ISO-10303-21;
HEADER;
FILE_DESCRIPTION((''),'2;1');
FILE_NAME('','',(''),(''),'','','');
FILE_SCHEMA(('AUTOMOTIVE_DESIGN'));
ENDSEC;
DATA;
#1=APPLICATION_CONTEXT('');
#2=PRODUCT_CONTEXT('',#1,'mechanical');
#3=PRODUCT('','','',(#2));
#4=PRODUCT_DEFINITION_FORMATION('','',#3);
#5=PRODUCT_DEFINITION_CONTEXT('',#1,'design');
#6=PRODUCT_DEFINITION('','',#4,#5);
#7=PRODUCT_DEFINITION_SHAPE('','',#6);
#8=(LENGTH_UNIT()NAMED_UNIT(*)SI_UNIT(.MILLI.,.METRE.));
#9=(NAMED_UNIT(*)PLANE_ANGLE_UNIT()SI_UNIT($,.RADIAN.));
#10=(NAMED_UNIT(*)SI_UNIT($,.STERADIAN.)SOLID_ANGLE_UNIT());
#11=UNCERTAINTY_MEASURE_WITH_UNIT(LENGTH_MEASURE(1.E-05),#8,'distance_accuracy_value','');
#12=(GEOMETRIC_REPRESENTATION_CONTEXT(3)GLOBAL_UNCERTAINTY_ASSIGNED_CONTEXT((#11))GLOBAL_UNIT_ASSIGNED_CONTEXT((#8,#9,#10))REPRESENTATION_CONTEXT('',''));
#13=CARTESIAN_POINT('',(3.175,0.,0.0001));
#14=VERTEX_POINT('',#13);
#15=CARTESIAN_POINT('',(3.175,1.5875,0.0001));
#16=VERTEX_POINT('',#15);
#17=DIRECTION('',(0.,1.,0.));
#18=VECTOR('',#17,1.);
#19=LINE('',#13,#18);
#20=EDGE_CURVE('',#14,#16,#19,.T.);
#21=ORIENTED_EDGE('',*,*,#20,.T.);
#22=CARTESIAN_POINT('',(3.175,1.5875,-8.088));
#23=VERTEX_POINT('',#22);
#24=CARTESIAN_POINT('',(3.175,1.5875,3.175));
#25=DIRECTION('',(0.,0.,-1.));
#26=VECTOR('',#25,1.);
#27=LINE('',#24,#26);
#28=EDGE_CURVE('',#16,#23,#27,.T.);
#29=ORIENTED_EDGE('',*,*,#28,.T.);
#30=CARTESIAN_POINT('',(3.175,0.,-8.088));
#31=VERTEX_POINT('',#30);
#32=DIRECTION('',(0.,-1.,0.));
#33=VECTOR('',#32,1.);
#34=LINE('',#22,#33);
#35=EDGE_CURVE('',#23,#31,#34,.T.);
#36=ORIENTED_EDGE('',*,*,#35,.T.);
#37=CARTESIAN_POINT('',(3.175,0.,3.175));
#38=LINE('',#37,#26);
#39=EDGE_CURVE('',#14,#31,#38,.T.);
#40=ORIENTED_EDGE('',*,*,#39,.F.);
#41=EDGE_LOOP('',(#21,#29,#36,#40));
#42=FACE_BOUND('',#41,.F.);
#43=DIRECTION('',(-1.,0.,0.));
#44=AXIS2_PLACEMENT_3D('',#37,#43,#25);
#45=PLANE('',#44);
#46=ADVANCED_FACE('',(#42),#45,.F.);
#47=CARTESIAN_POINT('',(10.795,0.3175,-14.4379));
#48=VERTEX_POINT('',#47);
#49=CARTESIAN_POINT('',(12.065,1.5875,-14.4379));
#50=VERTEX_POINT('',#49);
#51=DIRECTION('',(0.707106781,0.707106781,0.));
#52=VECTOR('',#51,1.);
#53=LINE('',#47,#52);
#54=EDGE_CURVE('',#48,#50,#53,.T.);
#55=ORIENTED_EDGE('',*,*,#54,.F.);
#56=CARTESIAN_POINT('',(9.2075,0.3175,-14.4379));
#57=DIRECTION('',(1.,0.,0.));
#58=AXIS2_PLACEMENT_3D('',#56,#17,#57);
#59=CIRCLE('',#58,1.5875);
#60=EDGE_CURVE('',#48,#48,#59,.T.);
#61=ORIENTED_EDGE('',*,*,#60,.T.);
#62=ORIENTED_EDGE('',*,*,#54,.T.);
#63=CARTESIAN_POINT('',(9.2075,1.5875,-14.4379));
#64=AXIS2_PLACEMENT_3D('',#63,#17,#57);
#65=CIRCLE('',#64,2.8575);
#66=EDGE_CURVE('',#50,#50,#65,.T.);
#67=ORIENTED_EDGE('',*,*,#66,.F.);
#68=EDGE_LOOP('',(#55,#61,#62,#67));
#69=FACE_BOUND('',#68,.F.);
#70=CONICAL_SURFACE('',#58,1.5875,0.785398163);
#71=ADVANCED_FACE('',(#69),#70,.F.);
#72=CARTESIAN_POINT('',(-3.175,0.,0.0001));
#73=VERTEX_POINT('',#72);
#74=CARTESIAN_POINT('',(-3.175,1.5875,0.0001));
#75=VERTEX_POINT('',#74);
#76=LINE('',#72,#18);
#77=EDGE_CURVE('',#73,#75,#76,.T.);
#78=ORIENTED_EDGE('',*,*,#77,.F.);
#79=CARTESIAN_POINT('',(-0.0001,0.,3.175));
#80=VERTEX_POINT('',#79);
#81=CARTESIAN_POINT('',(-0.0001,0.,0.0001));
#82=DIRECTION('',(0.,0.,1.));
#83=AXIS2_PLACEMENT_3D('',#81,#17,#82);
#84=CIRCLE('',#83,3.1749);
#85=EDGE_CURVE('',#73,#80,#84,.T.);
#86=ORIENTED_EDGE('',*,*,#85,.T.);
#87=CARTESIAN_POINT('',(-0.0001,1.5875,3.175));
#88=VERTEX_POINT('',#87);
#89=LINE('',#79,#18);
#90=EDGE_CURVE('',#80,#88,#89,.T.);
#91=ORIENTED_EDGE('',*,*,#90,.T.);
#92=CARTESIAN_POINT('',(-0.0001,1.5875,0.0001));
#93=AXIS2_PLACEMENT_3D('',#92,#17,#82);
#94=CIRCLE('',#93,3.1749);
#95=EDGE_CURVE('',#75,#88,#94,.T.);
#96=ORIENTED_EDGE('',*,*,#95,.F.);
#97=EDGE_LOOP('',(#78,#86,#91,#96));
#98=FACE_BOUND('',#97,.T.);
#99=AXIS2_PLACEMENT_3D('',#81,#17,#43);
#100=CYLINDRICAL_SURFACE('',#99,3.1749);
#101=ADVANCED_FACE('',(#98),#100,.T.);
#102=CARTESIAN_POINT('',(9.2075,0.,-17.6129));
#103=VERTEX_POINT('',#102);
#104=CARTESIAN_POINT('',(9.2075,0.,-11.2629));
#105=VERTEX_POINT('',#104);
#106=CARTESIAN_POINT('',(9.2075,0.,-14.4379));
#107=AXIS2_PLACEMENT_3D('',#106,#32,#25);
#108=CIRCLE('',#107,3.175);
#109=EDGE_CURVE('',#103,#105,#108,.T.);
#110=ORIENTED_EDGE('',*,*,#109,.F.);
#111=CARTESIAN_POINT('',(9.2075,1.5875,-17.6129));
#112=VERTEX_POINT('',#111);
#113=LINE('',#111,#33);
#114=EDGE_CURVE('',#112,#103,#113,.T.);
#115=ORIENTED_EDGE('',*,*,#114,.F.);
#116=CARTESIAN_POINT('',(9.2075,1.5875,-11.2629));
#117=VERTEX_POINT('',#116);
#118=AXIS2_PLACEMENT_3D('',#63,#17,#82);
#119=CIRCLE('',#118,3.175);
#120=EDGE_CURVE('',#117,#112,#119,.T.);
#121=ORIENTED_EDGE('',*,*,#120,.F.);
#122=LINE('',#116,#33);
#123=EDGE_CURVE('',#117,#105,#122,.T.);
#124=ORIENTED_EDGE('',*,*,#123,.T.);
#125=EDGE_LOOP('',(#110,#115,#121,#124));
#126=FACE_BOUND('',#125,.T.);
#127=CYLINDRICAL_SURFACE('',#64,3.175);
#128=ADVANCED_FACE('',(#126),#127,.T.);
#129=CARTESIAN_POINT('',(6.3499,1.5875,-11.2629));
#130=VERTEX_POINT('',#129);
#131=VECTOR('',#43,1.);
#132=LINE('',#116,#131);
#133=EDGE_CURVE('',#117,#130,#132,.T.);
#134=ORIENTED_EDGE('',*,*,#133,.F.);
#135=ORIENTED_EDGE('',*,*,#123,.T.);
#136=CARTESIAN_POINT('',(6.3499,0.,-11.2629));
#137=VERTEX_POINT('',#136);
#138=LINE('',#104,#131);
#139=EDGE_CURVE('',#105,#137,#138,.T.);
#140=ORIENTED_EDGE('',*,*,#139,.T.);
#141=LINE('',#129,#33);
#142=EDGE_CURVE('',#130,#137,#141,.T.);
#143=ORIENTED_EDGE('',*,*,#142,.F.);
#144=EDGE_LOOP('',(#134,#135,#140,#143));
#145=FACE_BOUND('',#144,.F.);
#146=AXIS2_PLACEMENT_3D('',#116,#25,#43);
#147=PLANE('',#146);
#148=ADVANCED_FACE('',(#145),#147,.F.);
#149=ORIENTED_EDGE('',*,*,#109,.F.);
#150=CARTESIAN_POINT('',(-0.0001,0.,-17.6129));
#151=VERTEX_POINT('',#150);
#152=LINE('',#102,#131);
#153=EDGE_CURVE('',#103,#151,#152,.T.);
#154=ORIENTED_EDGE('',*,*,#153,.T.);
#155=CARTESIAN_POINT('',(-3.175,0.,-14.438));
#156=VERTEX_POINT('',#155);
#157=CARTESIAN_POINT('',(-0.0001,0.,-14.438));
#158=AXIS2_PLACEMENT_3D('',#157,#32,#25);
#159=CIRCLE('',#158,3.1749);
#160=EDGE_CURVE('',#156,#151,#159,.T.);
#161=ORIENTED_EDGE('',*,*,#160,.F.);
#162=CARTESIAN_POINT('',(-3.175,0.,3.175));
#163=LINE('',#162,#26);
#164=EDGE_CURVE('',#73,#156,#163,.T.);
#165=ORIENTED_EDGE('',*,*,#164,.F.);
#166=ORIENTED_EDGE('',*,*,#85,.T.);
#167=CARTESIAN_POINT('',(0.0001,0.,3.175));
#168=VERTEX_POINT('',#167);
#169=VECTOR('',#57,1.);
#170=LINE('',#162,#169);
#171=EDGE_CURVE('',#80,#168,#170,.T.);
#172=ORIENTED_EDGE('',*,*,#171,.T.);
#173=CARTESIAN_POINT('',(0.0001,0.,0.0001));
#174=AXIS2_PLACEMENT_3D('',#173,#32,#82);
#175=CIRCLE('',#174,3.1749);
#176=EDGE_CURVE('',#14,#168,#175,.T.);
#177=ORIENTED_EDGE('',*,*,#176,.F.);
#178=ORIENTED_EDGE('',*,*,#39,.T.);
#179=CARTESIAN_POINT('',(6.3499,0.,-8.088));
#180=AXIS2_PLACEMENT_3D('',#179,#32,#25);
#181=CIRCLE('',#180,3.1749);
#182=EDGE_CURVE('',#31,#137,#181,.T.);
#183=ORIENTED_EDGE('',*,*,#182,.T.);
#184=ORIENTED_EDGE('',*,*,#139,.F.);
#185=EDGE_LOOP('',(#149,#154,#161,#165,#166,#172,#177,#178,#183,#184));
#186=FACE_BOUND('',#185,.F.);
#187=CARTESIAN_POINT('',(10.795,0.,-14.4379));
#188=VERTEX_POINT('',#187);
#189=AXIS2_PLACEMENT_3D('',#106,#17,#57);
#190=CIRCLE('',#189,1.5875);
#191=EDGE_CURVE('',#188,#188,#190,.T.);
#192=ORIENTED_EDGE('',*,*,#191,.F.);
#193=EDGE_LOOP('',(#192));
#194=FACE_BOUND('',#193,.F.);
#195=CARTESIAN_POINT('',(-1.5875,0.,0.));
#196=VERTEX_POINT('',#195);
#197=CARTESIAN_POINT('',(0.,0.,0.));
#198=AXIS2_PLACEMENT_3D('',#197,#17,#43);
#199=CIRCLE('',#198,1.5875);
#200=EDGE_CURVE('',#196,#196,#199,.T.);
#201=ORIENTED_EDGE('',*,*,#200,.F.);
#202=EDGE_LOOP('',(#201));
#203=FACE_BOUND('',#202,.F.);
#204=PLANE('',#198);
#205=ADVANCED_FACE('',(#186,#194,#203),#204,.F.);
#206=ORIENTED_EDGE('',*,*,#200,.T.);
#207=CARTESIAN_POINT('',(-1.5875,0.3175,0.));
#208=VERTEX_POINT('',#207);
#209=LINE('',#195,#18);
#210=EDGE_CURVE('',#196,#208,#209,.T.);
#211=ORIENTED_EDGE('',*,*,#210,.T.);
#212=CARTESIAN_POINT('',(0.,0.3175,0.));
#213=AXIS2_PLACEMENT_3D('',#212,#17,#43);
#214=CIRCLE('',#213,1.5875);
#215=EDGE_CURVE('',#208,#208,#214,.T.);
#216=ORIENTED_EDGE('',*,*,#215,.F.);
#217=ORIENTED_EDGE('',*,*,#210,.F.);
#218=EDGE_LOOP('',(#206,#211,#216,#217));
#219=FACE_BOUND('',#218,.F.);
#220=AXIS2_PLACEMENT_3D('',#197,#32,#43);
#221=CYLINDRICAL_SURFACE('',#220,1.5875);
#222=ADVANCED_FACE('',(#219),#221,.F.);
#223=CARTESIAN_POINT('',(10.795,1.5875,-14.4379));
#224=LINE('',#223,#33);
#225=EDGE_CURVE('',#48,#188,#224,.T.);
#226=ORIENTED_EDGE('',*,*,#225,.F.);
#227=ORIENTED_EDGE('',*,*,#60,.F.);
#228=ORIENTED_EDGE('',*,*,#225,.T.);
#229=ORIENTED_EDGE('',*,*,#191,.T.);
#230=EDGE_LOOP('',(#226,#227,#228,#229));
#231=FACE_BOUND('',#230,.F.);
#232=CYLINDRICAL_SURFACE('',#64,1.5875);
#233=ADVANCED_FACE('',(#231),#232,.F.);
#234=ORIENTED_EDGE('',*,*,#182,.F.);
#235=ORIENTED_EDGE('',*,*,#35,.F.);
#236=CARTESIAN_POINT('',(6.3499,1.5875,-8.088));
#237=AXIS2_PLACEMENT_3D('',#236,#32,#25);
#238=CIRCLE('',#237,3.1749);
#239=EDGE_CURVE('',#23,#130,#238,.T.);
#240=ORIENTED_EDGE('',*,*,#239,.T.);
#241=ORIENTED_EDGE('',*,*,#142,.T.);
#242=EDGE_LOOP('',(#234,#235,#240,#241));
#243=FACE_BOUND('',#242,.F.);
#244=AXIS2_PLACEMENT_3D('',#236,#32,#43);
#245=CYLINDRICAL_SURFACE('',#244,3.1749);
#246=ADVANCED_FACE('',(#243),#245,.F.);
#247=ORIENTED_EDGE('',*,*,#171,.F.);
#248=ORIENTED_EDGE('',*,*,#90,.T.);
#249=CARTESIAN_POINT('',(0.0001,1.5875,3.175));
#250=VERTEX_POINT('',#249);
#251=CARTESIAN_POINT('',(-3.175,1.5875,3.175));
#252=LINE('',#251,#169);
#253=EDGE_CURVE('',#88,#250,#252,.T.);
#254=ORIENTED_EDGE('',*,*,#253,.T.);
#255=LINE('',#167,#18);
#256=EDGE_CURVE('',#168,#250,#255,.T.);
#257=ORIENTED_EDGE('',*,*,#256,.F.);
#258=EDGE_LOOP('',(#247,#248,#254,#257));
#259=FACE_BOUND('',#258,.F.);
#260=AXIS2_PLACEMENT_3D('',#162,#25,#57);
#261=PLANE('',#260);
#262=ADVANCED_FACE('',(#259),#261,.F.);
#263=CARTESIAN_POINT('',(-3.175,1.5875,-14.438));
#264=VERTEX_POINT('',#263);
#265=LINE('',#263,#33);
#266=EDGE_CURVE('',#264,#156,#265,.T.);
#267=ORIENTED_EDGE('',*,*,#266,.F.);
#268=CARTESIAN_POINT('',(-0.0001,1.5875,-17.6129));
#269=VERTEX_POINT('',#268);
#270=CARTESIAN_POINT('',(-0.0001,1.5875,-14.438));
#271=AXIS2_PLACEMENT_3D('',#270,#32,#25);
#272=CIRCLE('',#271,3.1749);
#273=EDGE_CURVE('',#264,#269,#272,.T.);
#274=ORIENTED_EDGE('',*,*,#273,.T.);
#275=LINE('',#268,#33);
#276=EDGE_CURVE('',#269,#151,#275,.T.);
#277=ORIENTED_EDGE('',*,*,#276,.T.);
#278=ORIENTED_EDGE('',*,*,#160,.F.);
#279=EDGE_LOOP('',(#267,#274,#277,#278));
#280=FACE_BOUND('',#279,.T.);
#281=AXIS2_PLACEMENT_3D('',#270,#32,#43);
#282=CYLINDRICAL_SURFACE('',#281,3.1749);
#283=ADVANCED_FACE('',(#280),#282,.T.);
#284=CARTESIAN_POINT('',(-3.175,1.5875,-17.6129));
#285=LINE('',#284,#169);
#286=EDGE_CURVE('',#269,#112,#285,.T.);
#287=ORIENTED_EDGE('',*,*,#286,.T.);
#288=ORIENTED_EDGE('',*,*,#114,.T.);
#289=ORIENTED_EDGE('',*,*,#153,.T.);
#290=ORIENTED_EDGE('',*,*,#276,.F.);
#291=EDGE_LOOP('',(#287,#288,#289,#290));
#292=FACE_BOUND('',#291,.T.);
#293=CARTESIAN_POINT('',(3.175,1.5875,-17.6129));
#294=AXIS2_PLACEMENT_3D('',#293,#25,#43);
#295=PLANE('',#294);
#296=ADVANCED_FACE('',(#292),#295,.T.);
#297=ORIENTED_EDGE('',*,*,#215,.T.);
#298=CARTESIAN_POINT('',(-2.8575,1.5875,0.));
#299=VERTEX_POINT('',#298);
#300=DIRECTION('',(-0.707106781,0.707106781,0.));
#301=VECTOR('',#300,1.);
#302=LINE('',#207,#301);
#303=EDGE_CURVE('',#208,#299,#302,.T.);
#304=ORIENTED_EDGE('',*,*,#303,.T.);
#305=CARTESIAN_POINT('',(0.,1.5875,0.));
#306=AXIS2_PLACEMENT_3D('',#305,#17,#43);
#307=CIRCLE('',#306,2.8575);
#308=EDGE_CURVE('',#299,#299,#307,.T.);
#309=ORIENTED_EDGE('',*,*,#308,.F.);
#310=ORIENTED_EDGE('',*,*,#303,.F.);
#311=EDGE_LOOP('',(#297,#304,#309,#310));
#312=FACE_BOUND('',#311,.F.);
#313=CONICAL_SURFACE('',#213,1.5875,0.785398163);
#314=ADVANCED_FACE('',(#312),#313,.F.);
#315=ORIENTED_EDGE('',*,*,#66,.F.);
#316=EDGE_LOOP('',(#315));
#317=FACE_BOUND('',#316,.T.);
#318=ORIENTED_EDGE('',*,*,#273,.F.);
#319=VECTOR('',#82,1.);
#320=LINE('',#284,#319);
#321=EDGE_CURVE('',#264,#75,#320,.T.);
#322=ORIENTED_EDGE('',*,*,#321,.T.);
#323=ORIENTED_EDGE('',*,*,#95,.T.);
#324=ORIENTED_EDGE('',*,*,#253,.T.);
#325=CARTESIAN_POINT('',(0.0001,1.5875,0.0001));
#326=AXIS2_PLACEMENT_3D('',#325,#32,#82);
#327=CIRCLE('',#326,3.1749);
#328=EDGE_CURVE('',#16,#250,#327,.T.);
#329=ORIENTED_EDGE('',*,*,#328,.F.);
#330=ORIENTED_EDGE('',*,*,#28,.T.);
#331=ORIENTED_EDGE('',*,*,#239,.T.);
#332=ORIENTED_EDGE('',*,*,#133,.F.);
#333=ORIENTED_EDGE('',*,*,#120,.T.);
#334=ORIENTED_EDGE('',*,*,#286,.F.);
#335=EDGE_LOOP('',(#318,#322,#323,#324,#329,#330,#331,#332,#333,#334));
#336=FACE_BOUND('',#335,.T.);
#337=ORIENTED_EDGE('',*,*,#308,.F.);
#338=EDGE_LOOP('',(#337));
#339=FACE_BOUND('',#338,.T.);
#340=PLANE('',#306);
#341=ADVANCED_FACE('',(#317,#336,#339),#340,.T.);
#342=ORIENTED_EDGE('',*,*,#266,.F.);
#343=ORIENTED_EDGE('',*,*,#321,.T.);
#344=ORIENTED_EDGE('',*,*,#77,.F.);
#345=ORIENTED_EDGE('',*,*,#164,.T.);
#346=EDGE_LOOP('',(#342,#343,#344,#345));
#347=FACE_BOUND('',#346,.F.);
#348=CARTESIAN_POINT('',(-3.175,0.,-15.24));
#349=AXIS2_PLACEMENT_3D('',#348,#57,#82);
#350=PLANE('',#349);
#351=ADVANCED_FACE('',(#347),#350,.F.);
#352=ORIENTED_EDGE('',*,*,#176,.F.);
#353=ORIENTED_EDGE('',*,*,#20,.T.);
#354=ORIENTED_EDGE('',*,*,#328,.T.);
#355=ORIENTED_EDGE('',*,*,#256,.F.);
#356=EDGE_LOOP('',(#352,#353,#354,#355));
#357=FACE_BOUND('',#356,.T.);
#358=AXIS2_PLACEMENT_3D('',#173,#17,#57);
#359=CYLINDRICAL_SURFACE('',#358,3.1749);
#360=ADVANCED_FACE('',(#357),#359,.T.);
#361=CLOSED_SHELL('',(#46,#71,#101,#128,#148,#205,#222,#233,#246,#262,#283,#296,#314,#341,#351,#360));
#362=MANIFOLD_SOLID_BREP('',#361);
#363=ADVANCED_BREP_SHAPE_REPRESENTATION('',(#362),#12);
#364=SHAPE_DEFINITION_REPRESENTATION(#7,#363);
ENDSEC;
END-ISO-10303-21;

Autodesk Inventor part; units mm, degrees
ref_plane "YZ Plane" through (0, 0, 0) normal (1, 0, 0) x (0, 1, 0)
ref_plane "XZ Plane" through (0, 0, 0) normal (0, 1, 0) x (-1, 0, 0)
ref_plane "XY Plane" through (0, 0, 0) normal (0, 0, 1) x (1, 0, 0)
sketch "Sketch1" plane through (0, 0, 0) normal (0, 1, 0) x (-1, 0, 0)
  circle A0 centre (0, 0) radius 1.5875
  line L0 (3.175, 3.175) -> (-3.175, 3.175)
  line L1 (-3.175, 3.175) -> (-3.175, -15.24)
  line L2 (-3.175, -15.24) -> (3.175, -15.24)
  line L3 (3.175, -15.24) -> (3.175, 3.175)
  dimension "d0" = 3.175
  dimension "d1" = 3.175
  dimension "d2" = 3.175
  dimension "d3" = 3.175
  dimension "d4" = 15.24
extrude "Extrusion1" add sketch "Sketch1" along normal blind 1.5875
chamfer "Chamfer1" distance 1.27 angle 45 1 edges at (1.5875, 1.5875, 0)
sketch "Sketch2" plane through (0, 1.5875, 0) normal (0, 1, 0) x (1, 0, 0)
  line L0 (-3.175, 15.24) -> (-3.175, -3.175) projected
  line L1 (3.175, -3.175) -> (3.175, 15.24) projected
  circle A0 centre (0, 0) radius 2.8575 projected
  circle A1 centre (9.2075, 14.4379) radius 1.5875
  circle A2 centre (9.2075, 14.4379) radius 3.175
  line L2 (9.2075, 17.6129) -> (3.175, 17.6129)
  line L3 (3.175, 0) -> (3.175, 15.875) projected
  line L4 (9.2075, 11.2629) -> (3.175, 11.2629)
  line L5 (-3.175, -3.175) -> (3.175, -3.175) projected
  line L6 (3.175, 15.24) -> (-3.175, 15.24) projected
  line L7 (3.175, 17.6129) -> (-3.175, 17.6129)
  line L8 (3.175, 15.24) -> (-3.175, 15.24) projected
  line L9 (-3.175, 17.6129) -> (-3.175, 15.24)
  line L10 (3.175, -3.175) -> (3.175, 15.24) projected
  line L11 (-3.175, 15.24) -> (3.175, 15.24)
  line L12 (3.175, 15.24) -> (3.175, 11.2629)
  dimension "d11" = 9.2075
  dimension "d12" = 14.4379
  dimension "d13" = 3.175
  dimension "d14" = 6.35
extrude "Extrusion3" add sketch "Sketch2" against normal up to surface (1.5875 mm away) contours L9 L7 L2 A2 L4 L1 L6 | A2
fillet "Fillet3" radius 3.175 4 edges at (3.175, 0.7937, -11.2629) (-3.175, 0.7937, -17.6129) (-3.175, 0.7937, 3.175) (3.175, 0.7937, 3.175)
chamfer "Chamfer3" distance 1.27 angle 45 1 edges at (7.62, 1.5875, -14.4379)
properties part number "limitSwitchHolder2Backplate" material "ABS Plastic"
